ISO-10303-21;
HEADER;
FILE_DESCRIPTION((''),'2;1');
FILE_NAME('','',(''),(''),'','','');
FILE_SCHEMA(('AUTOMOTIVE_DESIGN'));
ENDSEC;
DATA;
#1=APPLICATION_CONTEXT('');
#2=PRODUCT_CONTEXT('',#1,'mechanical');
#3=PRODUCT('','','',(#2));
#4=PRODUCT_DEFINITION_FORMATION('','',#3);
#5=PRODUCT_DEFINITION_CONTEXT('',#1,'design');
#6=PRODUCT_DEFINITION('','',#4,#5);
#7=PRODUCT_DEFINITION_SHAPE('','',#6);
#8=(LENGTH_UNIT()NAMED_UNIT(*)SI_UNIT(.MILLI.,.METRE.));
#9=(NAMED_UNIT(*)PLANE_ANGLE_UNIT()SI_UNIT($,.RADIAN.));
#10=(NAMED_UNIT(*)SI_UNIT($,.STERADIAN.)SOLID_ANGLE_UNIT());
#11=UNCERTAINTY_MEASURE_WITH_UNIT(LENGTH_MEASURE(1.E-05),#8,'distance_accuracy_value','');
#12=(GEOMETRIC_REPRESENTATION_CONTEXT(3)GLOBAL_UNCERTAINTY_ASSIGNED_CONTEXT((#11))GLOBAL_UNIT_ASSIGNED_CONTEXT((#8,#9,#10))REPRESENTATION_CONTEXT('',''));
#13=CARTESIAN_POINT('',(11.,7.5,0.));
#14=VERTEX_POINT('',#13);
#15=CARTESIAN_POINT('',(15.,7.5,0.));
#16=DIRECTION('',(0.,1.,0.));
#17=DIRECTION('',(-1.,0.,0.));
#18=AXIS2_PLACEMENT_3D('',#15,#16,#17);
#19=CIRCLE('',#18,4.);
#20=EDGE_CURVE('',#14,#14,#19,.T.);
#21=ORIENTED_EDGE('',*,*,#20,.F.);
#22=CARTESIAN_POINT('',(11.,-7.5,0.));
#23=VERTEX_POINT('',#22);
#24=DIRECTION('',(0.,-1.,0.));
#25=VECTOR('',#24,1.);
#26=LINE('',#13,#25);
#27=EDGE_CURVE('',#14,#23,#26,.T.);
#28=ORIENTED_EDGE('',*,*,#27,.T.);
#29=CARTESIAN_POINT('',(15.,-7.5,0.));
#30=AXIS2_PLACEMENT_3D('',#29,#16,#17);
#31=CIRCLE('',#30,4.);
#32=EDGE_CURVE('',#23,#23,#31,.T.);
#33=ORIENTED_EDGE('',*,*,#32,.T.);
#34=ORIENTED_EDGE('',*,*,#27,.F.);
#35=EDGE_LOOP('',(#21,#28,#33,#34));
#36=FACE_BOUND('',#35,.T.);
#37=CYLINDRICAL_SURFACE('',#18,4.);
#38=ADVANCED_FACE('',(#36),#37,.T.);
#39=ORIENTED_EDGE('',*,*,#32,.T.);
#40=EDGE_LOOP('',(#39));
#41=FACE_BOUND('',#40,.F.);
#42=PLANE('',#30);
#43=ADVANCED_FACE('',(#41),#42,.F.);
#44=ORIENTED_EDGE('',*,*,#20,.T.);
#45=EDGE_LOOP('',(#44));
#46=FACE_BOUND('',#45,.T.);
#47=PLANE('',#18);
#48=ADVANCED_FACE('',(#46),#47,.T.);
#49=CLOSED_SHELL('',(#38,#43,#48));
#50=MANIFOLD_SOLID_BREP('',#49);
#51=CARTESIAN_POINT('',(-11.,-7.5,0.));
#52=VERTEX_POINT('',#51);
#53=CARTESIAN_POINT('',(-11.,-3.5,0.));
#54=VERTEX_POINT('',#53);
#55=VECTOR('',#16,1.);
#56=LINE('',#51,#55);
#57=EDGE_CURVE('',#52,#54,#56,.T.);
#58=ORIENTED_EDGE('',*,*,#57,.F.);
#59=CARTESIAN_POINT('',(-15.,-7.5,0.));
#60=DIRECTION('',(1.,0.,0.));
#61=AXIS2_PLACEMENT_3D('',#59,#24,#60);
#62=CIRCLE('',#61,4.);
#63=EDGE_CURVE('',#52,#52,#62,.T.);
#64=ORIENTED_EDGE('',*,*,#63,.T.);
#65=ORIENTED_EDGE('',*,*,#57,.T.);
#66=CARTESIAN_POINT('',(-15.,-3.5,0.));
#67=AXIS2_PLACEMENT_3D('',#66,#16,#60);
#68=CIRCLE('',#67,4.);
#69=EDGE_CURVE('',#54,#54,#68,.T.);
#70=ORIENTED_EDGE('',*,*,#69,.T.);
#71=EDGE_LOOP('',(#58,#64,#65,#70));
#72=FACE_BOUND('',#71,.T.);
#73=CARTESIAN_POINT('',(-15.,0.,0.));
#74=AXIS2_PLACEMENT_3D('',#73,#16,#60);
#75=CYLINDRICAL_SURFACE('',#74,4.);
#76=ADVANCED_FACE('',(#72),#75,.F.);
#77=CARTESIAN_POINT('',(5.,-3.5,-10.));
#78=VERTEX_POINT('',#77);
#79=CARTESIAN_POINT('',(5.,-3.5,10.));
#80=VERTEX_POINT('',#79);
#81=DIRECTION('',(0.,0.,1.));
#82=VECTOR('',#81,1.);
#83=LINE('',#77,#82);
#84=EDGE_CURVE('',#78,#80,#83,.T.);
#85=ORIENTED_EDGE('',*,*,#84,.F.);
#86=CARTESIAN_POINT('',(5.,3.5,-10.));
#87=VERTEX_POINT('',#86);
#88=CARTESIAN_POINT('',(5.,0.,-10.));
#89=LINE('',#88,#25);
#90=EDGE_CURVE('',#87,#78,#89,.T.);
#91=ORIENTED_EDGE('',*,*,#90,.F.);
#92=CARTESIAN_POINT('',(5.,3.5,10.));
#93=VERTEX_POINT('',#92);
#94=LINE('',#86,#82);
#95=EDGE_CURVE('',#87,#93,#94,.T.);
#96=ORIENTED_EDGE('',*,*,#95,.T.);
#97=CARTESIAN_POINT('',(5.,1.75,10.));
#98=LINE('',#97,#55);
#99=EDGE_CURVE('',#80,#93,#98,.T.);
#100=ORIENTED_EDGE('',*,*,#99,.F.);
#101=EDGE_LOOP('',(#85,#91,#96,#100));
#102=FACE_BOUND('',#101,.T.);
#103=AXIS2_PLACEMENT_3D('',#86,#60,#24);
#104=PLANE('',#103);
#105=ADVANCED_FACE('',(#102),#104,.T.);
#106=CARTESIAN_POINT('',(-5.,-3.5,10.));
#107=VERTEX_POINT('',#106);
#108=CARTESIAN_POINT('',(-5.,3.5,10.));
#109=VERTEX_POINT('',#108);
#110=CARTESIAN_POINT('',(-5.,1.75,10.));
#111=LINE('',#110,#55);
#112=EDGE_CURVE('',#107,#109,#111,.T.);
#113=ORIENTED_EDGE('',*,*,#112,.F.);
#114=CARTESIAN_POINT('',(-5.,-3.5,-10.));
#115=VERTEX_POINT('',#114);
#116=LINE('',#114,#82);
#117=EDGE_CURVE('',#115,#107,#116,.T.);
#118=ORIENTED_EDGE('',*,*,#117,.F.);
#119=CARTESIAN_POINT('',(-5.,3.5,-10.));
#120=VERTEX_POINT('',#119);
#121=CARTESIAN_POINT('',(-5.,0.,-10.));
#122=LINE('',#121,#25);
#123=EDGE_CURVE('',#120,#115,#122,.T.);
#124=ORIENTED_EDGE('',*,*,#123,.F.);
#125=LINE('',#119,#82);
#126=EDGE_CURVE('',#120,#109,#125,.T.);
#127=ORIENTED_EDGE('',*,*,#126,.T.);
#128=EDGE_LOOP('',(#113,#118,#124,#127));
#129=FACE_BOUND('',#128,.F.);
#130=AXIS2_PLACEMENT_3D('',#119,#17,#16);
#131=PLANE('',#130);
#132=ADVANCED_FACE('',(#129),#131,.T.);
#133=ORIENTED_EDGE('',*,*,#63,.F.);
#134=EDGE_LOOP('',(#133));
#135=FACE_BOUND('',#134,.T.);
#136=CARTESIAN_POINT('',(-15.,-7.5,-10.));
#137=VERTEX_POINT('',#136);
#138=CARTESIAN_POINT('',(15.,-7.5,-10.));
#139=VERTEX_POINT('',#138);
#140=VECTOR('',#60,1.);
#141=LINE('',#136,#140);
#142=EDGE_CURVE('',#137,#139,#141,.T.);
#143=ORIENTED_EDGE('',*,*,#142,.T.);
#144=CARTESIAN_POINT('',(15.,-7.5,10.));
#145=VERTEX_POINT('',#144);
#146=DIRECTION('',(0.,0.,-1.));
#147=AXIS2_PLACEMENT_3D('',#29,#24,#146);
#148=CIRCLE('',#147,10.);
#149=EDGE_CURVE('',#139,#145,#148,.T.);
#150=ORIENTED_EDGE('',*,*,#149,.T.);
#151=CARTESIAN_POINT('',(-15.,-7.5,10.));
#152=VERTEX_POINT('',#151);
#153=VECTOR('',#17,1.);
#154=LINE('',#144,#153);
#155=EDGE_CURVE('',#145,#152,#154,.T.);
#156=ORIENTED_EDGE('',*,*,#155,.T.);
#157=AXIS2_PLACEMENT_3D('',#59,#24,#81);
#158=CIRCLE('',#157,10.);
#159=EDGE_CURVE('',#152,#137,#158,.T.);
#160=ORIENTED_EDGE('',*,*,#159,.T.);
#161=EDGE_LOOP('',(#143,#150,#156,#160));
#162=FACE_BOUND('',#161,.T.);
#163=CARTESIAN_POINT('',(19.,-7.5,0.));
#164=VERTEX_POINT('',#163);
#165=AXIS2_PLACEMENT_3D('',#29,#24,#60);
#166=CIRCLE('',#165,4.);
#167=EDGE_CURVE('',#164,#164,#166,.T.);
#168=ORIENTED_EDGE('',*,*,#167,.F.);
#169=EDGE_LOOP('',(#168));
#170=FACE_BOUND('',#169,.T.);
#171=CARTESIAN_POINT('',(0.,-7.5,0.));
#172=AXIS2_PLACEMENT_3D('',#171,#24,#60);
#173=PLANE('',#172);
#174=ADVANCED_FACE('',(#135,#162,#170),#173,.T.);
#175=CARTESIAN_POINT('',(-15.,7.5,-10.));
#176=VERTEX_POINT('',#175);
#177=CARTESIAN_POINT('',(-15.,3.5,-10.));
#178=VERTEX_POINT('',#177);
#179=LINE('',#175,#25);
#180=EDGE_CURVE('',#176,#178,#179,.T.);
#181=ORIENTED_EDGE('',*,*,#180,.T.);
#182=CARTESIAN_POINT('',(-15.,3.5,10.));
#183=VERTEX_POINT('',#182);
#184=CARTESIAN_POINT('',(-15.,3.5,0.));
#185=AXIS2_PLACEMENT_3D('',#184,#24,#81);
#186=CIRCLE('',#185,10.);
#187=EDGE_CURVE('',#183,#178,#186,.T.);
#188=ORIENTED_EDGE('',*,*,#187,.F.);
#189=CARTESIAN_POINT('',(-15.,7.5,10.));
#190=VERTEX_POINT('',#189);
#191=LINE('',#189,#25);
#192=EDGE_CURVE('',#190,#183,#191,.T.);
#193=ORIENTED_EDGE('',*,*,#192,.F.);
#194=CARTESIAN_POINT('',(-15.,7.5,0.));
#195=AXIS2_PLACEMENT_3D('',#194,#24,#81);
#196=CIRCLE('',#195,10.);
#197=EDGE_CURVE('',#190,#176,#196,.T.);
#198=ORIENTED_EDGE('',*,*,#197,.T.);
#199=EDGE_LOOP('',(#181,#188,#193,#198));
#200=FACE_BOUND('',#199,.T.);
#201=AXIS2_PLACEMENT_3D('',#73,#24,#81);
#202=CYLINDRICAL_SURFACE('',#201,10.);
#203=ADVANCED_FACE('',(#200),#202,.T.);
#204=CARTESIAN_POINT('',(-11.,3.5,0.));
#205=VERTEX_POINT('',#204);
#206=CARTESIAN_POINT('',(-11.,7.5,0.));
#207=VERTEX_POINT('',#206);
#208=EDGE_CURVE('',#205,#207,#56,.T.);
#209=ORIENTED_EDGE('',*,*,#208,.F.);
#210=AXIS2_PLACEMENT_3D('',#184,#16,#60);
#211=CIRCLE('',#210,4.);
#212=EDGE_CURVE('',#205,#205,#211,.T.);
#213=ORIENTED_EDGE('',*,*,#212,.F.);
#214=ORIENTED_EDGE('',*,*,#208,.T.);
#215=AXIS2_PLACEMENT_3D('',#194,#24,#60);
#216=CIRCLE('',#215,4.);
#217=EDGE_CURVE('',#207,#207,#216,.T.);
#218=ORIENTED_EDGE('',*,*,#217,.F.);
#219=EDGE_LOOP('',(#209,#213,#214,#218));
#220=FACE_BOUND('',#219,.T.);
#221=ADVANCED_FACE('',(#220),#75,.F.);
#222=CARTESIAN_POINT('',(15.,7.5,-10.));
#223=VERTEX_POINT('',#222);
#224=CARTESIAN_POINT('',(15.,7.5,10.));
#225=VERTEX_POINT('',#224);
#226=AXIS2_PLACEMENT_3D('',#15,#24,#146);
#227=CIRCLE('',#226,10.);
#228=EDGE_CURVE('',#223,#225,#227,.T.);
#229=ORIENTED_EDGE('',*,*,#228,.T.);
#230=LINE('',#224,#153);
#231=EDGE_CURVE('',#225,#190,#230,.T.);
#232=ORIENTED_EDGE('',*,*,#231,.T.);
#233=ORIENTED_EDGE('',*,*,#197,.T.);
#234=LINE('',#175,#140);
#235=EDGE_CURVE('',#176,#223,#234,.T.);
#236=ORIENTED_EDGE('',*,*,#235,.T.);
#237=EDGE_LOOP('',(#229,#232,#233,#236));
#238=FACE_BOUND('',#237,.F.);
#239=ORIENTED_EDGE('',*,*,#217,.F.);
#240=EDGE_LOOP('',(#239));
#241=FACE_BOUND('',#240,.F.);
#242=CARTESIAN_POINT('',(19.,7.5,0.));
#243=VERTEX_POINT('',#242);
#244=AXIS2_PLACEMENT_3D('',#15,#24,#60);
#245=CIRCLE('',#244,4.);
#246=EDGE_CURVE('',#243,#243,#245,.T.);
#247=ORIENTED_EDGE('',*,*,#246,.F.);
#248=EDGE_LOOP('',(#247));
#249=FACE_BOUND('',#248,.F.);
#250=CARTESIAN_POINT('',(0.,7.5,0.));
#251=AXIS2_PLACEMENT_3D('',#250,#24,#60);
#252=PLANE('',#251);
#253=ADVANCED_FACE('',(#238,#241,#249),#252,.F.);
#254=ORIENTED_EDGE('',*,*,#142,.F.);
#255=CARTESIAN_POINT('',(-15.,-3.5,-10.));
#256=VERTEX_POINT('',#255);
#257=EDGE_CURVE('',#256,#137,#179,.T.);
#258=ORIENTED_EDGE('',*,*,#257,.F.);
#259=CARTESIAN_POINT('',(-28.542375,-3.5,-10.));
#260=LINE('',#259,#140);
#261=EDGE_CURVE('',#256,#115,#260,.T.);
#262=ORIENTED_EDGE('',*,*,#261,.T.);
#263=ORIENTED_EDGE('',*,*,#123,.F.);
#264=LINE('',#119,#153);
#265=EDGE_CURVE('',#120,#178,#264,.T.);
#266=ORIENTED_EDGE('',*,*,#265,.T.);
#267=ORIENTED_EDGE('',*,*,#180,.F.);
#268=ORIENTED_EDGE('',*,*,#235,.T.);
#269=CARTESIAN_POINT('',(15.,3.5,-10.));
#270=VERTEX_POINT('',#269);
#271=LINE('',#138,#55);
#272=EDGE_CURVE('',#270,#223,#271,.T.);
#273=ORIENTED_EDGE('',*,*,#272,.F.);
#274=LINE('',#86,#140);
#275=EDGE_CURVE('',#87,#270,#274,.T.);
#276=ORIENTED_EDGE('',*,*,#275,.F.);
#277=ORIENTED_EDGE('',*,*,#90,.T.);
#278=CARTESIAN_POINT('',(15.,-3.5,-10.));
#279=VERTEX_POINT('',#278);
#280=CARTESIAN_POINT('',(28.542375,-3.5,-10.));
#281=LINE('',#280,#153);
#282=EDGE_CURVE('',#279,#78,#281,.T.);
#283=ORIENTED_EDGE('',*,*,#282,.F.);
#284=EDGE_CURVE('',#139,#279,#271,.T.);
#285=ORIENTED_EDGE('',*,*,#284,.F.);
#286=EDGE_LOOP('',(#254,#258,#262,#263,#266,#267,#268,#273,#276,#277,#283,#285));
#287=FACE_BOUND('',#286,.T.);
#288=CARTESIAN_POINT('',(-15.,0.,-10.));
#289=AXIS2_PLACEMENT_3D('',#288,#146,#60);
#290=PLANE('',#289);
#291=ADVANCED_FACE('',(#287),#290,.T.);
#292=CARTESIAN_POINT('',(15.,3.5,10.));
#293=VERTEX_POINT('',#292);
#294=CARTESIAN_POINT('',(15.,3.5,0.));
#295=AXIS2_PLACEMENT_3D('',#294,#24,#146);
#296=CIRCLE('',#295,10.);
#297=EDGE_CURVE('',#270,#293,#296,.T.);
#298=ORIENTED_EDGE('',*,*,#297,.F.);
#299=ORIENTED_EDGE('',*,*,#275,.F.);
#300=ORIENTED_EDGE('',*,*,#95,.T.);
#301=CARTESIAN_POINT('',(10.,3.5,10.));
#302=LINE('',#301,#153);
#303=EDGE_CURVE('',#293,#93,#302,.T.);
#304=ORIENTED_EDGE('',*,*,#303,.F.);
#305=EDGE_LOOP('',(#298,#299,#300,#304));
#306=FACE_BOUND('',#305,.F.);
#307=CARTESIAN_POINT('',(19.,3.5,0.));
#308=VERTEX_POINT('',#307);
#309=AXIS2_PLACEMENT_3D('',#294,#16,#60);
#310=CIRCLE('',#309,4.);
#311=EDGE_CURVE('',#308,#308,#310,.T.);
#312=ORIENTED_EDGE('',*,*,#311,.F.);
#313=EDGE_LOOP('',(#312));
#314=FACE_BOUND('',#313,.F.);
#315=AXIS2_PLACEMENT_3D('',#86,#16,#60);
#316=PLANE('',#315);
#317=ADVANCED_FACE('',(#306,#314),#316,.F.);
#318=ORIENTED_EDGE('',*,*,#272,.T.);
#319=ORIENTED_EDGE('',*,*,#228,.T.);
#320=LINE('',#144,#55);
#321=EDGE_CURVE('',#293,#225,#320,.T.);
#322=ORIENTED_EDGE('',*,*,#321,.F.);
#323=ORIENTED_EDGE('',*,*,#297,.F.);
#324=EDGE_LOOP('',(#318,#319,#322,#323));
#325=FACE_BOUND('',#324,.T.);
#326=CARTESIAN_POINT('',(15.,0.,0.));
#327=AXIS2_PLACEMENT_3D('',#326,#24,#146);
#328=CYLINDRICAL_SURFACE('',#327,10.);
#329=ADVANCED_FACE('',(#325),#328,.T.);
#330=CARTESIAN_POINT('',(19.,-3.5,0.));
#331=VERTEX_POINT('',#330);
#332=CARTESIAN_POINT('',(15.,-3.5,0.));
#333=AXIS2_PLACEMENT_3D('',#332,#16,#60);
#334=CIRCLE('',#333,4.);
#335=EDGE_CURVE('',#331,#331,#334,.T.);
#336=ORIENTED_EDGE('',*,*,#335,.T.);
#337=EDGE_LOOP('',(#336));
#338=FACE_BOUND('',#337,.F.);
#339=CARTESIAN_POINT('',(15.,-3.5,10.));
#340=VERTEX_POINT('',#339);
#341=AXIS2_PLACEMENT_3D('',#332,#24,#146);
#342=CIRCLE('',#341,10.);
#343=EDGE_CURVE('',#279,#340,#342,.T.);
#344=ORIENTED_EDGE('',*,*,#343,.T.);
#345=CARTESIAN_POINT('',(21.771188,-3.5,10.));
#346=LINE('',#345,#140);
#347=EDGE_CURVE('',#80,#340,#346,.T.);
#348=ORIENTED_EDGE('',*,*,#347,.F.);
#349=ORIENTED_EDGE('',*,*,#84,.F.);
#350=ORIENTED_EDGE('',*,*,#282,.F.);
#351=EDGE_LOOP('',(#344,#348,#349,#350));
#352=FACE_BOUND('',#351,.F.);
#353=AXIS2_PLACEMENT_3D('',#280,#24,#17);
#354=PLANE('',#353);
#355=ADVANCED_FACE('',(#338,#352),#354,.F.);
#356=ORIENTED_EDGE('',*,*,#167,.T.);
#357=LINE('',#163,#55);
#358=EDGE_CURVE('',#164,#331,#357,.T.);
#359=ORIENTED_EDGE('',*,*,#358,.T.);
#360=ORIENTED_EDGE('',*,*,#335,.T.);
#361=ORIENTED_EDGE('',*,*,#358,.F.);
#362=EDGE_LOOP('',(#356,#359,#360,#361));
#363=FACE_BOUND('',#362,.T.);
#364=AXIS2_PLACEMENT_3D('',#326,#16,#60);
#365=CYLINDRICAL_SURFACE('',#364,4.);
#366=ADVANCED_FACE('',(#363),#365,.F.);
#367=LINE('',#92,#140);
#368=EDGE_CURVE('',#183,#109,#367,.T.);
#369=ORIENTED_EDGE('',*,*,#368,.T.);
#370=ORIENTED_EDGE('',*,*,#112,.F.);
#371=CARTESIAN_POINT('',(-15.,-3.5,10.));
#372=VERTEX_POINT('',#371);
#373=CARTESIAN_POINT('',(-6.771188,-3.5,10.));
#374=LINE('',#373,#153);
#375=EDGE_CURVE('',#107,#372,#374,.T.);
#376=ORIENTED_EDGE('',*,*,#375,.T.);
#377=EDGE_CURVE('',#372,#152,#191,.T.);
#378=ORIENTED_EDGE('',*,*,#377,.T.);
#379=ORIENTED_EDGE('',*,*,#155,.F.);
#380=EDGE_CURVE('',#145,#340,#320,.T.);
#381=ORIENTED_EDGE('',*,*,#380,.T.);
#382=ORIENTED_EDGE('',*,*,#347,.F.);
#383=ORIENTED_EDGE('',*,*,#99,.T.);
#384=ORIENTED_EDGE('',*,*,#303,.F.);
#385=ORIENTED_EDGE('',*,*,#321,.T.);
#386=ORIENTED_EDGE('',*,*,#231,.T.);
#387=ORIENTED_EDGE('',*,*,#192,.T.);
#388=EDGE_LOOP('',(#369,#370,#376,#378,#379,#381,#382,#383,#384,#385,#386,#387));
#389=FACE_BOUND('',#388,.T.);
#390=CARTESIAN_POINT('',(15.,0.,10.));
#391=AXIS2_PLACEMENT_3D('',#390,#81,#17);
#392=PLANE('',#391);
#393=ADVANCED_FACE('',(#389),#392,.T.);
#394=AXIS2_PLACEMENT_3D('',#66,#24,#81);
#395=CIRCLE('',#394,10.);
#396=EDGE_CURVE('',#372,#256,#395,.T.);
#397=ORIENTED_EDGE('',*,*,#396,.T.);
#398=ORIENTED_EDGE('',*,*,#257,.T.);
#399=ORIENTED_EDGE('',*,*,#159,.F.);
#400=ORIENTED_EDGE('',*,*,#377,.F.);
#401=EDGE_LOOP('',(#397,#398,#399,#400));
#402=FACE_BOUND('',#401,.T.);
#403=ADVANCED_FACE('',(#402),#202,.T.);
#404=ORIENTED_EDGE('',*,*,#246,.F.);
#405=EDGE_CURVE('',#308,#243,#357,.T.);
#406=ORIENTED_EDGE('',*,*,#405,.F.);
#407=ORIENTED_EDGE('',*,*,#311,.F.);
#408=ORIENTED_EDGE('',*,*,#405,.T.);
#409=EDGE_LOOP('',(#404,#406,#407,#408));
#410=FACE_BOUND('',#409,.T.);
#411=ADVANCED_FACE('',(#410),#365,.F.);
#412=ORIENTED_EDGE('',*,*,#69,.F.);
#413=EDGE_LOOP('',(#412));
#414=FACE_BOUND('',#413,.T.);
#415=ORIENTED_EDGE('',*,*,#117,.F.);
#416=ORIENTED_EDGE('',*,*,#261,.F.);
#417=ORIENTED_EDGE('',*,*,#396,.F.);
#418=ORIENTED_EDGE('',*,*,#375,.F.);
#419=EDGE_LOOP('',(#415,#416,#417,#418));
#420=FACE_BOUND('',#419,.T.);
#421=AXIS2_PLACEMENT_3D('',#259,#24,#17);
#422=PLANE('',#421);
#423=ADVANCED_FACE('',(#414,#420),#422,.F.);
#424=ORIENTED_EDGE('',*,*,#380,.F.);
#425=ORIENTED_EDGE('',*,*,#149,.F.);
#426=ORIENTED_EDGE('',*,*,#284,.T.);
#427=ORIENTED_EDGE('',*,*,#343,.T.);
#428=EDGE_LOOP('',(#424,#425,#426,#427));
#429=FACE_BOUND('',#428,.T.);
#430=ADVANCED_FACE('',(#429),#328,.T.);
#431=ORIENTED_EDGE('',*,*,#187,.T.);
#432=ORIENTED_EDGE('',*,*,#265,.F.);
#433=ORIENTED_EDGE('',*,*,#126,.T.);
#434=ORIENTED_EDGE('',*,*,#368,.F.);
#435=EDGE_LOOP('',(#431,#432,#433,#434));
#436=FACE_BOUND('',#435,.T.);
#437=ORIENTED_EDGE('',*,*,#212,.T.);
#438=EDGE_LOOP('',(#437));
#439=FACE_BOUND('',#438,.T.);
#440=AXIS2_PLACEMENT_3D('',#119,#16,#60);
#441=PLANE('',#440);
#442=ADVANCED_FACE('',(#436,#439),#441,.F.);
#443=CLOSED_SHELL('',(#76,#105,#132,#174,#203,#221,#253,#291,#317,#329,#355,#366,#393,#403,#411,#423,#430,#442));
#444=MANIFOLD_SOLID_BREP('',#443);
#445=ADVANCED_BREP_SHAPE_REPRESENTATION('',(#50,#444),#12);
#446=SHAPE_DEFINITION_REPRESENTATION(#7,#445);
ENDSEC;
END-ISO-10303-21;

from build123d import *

# Parameters (mm, degrees)
F0_R     = 4
F1_DEPTH = 7.5
F2_W     = 13.542375192
F2_H     = 7
F2_W_2   = 10
F3_DEPTH = 20.001
F4_R     = 4
F5_DEPTH = 15


# Not quite as in the source:
# - a pattern or mirror of a feature is missing from the dataset's text; its kind, count and spacing are read off the source's solid


with BuildPart() as f1:
    # F0 (on Front) → F1 (new body, symmetric)
    with BuildSketch(Plane.XZ):
        with BuildLine():
            Line((15, 10), (-15, 10))
            ThreePointArc((-15, 10), (-25, 0), (-15, -10))
            Line((-15, -10), (15, -10))
            ThreePointArc((15, -10), (25, 0), (15, 10))
        make_face()
        with Locations((-15, 0)):
            Circle(F0_R, mode=Mode.SUBTRACT)
        with Locations((15, 0)):
            Circle(F0_R, mode=Mode.SUBTRACT)
    extrude(amount=F1_DEPTH, both=True)

    # F2 (on face) → F3 (cut, through all)
    with BuildSketch(Plane(origin=(0, 0, -10), x_dir=(1, 0, 0), z_dir=(0, 0, -1))):
        with Locations((21.771187596, 0)):
            Rectangle(F2_W, F2_H)
        with Locations((10, 0)):
            Rectangle(F2_W_2, F2_H)
    f3 = extrude(amount=-F3_DEPTH, mode=Mode.SUBTRACT)

    # F3_copies: F3 across plane
    add(f3.mirror(Plane(origin=(0, 0, 0), x_dir=(0, 0, -1), z_dir=(-1, 0, 0))), mode=Mode.SUBTRACT)


with BuildPart() as f5:
    # F4 (on face) → F5 (new body)
    with BuildSketch(Plane(origin=(0, 7.5, 0), x_dir=(-1, 0, 0), z_dir=(0, 1, 0))):
        with Locations((-15, 0)):
            Circle(F4_R)
    extrude(amount=-F5_DEPTH)


with BuildPart() as f5b:
    # F4 (on face) → F5, piece 2 (new body)
    with BuildSketch(Plane(origin=(0, 7.5, 0), x_dir=(-1, 0, 0), z_dir=(0, 1, 0))):
        with Locations((15, 0)):
            Circle(F4_R)
    extrude(amount=-F5_DEPTH)


solid = Compound([f1.part, f5.part])
